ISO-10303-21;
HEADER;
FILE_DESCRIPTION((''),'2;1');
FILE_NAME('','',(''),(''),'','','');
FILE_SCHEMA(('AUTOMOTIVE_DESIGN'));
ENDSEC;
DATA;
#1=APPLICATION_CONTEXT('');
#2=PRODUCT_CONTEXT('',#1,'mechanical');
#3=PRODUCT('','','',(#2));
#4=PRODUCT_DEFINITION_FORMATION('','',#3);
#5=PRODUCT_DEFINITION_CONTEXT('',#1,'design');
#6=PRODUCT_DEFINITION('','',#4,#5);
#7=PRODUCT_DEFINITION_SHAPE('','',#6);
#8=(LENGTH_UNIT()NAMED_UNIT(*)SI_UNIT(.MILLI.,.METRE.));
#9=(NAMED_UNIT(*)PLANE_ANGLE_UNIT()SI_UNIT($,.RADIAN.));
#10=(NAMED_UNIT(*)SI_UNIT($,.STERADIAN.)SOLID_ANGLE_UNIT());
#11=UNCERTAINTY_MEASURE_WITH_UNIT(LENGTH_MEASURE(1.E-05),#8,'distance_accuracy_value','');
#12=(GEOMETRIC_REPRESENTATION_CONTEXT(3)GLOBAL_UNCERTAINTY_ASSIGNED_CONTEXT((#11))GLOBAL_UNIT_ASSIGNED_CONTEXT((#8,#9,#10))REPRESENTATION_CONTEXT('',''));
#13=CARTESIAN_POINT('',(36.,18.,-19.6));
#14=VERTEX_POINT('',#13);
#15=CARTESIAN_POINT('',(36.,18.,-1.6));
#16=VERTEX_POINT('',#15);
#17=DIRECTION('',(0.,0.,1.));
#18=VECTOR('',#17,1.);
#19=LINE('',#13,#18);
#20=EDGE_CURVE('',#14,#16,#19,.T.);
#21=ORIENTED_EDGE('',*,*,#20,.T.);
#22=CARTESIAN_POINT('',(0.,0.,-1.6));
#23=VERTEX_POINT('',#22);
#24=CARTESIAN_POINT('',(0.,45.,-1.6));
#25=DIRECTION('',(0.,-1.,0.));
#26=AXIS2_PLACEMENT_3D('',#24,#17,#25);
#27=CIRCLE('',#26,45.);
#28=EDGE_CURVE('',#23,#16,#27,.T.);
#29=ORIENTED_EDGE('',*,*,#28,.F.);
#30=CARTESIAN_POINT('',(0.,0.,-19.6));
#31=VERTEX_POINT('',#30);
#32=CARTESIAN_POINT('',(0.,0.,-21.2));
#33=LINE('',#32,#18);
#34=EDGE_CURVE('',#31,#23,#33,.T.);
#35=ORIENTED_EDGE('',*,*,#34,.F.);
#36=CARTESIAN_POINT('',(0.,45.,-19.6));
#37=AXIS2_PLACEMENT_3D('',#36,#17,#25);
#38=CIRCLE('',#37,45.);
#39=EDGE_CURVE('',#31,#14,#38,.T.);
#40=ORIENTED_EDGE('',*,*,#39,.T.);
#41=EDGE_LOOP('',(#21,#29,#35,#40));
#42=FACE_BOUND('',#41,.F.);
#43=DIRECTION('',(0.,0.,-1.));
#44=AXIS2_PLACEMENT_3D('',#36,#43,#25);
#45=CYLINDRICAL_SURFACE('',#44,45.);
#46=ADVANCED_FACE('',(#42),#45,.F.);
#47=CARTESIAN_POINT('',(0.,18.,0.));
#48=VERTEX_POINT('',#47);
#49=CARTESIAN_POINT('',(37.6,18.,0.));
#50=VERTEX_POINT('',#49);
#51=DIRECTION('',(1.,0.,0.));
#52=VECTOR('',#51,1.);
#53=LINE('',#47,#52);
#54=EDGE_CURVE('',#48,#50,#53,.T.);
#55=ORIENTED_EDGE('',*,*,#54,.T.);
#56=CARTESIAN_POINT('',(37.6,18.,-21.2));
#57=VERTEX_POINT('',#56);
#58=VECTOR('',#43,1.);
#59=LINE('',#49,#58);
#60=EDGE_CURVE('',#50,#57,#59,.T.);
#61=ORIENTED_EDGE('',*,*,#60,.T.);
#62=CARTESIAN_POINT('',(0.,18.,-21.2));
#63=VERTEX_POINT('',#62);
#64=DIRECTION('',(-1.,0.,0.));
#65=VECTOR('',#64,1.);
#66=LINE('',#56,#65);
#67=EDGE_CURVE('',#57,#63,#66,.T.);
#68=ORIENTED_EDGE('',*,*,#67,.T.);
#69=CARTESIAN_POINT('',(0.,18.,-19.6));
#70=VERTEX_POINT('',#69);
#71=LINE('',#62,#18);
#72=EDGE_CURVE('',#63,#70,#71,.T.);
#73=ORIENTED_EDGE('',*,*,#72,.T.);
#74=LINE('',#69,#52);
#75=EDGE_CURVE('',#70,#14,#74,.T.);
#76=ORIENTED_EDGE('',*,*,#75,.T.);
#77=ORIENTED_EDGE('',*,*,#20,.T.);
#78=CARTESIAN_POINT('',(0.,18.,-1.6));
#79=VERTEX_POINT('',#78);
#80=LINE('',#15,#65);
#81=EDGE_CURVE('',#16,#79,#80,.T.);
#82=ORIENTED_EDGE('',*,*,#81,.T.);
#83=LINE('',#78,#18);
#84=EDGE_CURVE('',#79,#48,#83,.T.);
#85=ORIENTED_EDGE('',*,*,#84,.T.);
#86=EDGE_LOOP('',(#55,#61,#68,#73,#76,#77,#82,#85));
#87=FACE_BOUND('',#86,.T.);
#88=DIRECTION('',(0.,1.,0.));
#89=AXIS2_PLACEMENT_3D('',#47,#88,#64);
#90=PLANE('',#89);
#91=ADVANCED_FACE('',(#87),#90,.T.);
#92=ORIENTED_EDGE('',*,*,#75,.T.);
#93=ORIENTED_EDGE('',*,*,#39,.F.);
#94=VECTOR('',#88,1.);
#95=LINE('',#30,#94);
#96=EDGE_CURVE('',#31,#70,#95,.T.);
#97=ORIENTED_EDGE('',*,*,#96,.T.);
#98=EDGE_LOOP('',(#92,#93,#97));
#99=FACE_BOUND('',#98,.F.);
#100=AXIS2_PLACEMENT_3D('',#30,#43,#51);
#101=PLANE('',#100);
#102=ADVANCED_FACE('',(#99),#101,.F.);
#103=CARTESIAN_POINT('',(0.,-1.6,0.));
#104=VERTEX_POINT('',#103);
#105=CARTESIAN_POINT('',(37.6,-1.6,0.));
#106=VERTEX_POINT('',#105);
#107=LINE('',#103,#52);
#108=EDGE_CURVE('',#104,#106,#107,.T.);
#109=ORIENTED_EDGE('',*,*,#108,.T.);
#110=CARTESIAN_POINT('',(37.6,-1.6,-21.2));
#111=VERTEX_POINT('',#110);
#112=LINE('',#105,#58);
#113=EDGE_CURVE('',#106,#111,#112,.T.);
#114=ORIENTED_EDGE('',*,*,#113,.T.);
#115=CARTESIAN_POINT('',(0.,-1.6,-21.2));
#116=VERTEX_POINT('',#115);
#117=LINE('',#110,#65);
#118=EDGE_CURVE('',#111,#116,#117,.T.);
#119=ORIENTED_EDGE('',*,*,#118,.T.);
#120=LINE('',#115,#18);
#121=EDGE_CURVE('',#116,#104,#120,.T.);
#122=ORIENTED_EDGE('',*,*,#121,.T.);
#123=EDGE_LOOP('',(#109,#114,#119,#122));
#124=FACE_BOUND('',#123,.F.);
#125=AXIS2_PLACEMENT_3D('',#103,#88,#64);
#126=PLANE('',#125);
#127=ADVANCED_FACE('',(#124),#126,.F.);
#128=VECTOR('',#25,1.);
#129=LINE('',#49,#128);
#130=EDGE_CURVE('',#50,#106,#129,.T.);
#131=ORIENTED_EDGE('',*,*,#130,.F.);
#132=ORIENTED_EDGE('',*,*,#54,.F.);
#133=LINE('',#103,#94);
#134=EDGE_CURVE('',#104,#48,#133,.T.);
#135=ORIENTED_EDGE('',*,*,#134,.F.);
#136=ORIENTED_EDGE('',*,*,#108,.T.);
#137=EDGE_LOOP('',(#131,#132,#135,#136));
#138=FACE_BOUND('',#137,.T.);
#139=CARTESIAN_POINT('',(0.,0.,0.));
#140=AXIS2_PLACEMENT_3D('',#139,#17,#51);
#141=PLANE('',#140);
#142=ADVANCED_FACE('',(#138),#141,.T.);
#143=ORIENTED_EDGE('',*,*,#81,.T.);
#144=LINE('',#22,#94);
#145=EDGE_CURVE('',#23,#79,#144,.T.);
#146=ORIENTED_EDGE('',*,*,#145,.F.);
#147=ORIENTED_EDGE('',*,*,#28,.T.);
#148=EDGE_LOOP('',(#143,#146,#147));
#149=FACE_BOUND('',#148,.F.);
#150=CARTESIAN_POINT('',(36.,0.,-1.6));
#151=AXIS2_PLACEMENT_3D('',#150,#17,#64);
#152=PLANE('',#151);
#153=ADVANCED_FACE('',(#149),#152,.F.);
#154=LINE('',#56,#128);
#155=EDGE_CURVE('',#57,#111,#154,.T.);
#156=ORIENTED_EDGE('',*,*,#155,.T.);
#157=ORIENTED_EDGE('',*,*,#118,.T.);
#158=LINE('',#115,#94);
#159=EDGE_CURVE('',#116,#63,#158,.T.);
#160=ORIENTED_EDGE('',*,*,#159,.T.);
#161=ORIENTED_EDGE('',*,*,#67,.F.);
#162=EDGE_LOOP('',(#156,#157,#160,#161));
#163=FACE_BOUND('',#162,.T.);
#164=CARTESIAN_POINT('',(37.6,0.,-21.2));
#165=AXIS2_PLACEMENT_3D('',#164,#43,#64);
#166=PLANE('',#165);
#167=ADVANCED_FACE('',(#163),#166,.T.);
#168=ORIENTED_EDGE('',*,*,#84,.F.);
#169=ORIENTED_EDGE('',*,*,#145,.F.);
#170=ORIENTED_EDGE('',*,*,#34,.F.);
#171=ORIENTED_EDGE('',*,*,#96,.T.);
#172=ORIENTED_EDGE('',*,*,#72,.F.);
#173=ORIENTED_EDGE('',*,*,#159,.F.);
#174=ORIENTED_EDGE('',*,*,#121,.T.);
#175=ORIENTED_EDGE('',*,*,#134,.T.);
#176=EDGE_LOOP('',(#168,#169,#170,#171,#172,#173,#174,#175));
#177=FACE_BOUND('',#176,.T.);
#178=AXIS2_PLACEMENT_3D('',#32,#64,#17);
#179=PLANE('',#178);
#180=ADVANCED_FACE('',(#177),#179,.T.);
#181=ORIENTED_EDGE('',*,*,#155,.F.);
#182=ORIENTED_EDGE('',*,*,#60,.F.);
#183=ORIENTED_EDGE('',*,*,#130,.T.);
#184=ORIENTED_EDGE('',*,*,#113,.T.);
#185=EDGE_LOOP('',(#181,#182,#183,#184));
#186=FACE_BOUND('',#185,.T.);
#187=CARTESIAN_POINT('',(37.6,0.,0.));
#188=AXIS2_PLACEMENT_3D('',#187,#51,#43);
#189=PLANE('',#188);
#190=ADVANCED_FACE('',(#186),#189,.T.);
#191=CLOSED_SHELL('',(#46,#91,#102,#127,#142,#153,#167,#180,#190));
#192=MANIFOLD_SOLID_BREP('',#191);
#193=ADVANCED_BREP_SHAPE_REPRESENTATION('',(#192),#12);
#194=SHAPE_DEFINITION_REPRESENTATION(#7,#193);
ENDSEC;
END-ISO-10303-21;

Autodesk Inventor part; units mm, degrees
ref_plane "YZ Plane" through (0, 0, 0) normal (1, 0, 0) x (0, 1, 0)
ref_plane "XZ Plane" through (0, 0, 0) normal (0, 1, 0) x (-1, 0, 0)
ref_plane "XY Plane" through (0, 0, 0) normal (0, 0, 1) x (1, 0, 0)
sketch "Esboço1" plane through (0, 0, 0) normal (0, 1, 0) x (-1, 0, 0)
  line L0 (-36, -1.6) -> (0, -1.6)
  line L1 (0, -19.6) -> (-36, -19.6)
  line L2 (-36, -19.6) -> (-36, -1.6)
  line L3 (0, 0) -> (-37.6, 0)
  line L4 (-37.6, 0) -> (-37.6, -21.2)
  line L5 (-37.6, -21.2) -> (0, -21.2)
  line L6 (0, -21.2) -> (0, 0)
  dimension "d0" = 1.6
  dimension "d1" = 18
  dimension "d7" = 36
sketch "Esboço1 outline for Extrusão1" plane through (0, 0, 0) normal (0, 1, 0) x (-1, 0, 0)
  line L0 (0, -21.2) -> (0, 0)
  line L1 (-37.6, -21.2) -> (0, -21.2)
  line L2 (-37.6, 0) -> (-37.6, -21.2)
  line L3 (0, 0) -> (-37.6, 0)
extrude "Extrusão1" add sketch "Esboço1 outline for Extrusão1" against normal blind 1.6
sketch "Esboço1 outline for Extrusão2" plane through (0, 0, 0) normal (0, 1, 0) x (-1, 0, 0)
  line L0 (-36, -19.6) -> (-36, -1.6)
  line L1 (0, -19.6) -> (-36, -19.6)
  line L2 (0, -21.2) -> (0, -19.6)
  line L3 (-37.6, -21.2) -> (0, -21.2)
  line L4 (-37.6, 0) -> (-37.6, -21.2)
  line L5 (0, 0) -> (-37.6, 0)
  line L6 (0, -1.6) -> (0, 0)
  line L7 (-36, -1.6) -> (0, -1.6)
extrude "Extrusão2" add sketch "Esboço1 outline for Extrusão2" along normal blind 18
fillet "Arredondamento1" radius 45 1 edges at (36, 0, -10.6)
equation "\"d0\" = Margem"
equation "\"d1\" = Esfera"
equation "\"d7\" = 2 * Esfera"
equation "\"d2\" = Margem"
equation "\"d4\" = Esfera"
equation "\"d6\" = 2.5 * Esfera"
equation "\"Esfera\" = 18"
equation "\"Margem\" = 1.6"
properties part number "Peça que libera"
